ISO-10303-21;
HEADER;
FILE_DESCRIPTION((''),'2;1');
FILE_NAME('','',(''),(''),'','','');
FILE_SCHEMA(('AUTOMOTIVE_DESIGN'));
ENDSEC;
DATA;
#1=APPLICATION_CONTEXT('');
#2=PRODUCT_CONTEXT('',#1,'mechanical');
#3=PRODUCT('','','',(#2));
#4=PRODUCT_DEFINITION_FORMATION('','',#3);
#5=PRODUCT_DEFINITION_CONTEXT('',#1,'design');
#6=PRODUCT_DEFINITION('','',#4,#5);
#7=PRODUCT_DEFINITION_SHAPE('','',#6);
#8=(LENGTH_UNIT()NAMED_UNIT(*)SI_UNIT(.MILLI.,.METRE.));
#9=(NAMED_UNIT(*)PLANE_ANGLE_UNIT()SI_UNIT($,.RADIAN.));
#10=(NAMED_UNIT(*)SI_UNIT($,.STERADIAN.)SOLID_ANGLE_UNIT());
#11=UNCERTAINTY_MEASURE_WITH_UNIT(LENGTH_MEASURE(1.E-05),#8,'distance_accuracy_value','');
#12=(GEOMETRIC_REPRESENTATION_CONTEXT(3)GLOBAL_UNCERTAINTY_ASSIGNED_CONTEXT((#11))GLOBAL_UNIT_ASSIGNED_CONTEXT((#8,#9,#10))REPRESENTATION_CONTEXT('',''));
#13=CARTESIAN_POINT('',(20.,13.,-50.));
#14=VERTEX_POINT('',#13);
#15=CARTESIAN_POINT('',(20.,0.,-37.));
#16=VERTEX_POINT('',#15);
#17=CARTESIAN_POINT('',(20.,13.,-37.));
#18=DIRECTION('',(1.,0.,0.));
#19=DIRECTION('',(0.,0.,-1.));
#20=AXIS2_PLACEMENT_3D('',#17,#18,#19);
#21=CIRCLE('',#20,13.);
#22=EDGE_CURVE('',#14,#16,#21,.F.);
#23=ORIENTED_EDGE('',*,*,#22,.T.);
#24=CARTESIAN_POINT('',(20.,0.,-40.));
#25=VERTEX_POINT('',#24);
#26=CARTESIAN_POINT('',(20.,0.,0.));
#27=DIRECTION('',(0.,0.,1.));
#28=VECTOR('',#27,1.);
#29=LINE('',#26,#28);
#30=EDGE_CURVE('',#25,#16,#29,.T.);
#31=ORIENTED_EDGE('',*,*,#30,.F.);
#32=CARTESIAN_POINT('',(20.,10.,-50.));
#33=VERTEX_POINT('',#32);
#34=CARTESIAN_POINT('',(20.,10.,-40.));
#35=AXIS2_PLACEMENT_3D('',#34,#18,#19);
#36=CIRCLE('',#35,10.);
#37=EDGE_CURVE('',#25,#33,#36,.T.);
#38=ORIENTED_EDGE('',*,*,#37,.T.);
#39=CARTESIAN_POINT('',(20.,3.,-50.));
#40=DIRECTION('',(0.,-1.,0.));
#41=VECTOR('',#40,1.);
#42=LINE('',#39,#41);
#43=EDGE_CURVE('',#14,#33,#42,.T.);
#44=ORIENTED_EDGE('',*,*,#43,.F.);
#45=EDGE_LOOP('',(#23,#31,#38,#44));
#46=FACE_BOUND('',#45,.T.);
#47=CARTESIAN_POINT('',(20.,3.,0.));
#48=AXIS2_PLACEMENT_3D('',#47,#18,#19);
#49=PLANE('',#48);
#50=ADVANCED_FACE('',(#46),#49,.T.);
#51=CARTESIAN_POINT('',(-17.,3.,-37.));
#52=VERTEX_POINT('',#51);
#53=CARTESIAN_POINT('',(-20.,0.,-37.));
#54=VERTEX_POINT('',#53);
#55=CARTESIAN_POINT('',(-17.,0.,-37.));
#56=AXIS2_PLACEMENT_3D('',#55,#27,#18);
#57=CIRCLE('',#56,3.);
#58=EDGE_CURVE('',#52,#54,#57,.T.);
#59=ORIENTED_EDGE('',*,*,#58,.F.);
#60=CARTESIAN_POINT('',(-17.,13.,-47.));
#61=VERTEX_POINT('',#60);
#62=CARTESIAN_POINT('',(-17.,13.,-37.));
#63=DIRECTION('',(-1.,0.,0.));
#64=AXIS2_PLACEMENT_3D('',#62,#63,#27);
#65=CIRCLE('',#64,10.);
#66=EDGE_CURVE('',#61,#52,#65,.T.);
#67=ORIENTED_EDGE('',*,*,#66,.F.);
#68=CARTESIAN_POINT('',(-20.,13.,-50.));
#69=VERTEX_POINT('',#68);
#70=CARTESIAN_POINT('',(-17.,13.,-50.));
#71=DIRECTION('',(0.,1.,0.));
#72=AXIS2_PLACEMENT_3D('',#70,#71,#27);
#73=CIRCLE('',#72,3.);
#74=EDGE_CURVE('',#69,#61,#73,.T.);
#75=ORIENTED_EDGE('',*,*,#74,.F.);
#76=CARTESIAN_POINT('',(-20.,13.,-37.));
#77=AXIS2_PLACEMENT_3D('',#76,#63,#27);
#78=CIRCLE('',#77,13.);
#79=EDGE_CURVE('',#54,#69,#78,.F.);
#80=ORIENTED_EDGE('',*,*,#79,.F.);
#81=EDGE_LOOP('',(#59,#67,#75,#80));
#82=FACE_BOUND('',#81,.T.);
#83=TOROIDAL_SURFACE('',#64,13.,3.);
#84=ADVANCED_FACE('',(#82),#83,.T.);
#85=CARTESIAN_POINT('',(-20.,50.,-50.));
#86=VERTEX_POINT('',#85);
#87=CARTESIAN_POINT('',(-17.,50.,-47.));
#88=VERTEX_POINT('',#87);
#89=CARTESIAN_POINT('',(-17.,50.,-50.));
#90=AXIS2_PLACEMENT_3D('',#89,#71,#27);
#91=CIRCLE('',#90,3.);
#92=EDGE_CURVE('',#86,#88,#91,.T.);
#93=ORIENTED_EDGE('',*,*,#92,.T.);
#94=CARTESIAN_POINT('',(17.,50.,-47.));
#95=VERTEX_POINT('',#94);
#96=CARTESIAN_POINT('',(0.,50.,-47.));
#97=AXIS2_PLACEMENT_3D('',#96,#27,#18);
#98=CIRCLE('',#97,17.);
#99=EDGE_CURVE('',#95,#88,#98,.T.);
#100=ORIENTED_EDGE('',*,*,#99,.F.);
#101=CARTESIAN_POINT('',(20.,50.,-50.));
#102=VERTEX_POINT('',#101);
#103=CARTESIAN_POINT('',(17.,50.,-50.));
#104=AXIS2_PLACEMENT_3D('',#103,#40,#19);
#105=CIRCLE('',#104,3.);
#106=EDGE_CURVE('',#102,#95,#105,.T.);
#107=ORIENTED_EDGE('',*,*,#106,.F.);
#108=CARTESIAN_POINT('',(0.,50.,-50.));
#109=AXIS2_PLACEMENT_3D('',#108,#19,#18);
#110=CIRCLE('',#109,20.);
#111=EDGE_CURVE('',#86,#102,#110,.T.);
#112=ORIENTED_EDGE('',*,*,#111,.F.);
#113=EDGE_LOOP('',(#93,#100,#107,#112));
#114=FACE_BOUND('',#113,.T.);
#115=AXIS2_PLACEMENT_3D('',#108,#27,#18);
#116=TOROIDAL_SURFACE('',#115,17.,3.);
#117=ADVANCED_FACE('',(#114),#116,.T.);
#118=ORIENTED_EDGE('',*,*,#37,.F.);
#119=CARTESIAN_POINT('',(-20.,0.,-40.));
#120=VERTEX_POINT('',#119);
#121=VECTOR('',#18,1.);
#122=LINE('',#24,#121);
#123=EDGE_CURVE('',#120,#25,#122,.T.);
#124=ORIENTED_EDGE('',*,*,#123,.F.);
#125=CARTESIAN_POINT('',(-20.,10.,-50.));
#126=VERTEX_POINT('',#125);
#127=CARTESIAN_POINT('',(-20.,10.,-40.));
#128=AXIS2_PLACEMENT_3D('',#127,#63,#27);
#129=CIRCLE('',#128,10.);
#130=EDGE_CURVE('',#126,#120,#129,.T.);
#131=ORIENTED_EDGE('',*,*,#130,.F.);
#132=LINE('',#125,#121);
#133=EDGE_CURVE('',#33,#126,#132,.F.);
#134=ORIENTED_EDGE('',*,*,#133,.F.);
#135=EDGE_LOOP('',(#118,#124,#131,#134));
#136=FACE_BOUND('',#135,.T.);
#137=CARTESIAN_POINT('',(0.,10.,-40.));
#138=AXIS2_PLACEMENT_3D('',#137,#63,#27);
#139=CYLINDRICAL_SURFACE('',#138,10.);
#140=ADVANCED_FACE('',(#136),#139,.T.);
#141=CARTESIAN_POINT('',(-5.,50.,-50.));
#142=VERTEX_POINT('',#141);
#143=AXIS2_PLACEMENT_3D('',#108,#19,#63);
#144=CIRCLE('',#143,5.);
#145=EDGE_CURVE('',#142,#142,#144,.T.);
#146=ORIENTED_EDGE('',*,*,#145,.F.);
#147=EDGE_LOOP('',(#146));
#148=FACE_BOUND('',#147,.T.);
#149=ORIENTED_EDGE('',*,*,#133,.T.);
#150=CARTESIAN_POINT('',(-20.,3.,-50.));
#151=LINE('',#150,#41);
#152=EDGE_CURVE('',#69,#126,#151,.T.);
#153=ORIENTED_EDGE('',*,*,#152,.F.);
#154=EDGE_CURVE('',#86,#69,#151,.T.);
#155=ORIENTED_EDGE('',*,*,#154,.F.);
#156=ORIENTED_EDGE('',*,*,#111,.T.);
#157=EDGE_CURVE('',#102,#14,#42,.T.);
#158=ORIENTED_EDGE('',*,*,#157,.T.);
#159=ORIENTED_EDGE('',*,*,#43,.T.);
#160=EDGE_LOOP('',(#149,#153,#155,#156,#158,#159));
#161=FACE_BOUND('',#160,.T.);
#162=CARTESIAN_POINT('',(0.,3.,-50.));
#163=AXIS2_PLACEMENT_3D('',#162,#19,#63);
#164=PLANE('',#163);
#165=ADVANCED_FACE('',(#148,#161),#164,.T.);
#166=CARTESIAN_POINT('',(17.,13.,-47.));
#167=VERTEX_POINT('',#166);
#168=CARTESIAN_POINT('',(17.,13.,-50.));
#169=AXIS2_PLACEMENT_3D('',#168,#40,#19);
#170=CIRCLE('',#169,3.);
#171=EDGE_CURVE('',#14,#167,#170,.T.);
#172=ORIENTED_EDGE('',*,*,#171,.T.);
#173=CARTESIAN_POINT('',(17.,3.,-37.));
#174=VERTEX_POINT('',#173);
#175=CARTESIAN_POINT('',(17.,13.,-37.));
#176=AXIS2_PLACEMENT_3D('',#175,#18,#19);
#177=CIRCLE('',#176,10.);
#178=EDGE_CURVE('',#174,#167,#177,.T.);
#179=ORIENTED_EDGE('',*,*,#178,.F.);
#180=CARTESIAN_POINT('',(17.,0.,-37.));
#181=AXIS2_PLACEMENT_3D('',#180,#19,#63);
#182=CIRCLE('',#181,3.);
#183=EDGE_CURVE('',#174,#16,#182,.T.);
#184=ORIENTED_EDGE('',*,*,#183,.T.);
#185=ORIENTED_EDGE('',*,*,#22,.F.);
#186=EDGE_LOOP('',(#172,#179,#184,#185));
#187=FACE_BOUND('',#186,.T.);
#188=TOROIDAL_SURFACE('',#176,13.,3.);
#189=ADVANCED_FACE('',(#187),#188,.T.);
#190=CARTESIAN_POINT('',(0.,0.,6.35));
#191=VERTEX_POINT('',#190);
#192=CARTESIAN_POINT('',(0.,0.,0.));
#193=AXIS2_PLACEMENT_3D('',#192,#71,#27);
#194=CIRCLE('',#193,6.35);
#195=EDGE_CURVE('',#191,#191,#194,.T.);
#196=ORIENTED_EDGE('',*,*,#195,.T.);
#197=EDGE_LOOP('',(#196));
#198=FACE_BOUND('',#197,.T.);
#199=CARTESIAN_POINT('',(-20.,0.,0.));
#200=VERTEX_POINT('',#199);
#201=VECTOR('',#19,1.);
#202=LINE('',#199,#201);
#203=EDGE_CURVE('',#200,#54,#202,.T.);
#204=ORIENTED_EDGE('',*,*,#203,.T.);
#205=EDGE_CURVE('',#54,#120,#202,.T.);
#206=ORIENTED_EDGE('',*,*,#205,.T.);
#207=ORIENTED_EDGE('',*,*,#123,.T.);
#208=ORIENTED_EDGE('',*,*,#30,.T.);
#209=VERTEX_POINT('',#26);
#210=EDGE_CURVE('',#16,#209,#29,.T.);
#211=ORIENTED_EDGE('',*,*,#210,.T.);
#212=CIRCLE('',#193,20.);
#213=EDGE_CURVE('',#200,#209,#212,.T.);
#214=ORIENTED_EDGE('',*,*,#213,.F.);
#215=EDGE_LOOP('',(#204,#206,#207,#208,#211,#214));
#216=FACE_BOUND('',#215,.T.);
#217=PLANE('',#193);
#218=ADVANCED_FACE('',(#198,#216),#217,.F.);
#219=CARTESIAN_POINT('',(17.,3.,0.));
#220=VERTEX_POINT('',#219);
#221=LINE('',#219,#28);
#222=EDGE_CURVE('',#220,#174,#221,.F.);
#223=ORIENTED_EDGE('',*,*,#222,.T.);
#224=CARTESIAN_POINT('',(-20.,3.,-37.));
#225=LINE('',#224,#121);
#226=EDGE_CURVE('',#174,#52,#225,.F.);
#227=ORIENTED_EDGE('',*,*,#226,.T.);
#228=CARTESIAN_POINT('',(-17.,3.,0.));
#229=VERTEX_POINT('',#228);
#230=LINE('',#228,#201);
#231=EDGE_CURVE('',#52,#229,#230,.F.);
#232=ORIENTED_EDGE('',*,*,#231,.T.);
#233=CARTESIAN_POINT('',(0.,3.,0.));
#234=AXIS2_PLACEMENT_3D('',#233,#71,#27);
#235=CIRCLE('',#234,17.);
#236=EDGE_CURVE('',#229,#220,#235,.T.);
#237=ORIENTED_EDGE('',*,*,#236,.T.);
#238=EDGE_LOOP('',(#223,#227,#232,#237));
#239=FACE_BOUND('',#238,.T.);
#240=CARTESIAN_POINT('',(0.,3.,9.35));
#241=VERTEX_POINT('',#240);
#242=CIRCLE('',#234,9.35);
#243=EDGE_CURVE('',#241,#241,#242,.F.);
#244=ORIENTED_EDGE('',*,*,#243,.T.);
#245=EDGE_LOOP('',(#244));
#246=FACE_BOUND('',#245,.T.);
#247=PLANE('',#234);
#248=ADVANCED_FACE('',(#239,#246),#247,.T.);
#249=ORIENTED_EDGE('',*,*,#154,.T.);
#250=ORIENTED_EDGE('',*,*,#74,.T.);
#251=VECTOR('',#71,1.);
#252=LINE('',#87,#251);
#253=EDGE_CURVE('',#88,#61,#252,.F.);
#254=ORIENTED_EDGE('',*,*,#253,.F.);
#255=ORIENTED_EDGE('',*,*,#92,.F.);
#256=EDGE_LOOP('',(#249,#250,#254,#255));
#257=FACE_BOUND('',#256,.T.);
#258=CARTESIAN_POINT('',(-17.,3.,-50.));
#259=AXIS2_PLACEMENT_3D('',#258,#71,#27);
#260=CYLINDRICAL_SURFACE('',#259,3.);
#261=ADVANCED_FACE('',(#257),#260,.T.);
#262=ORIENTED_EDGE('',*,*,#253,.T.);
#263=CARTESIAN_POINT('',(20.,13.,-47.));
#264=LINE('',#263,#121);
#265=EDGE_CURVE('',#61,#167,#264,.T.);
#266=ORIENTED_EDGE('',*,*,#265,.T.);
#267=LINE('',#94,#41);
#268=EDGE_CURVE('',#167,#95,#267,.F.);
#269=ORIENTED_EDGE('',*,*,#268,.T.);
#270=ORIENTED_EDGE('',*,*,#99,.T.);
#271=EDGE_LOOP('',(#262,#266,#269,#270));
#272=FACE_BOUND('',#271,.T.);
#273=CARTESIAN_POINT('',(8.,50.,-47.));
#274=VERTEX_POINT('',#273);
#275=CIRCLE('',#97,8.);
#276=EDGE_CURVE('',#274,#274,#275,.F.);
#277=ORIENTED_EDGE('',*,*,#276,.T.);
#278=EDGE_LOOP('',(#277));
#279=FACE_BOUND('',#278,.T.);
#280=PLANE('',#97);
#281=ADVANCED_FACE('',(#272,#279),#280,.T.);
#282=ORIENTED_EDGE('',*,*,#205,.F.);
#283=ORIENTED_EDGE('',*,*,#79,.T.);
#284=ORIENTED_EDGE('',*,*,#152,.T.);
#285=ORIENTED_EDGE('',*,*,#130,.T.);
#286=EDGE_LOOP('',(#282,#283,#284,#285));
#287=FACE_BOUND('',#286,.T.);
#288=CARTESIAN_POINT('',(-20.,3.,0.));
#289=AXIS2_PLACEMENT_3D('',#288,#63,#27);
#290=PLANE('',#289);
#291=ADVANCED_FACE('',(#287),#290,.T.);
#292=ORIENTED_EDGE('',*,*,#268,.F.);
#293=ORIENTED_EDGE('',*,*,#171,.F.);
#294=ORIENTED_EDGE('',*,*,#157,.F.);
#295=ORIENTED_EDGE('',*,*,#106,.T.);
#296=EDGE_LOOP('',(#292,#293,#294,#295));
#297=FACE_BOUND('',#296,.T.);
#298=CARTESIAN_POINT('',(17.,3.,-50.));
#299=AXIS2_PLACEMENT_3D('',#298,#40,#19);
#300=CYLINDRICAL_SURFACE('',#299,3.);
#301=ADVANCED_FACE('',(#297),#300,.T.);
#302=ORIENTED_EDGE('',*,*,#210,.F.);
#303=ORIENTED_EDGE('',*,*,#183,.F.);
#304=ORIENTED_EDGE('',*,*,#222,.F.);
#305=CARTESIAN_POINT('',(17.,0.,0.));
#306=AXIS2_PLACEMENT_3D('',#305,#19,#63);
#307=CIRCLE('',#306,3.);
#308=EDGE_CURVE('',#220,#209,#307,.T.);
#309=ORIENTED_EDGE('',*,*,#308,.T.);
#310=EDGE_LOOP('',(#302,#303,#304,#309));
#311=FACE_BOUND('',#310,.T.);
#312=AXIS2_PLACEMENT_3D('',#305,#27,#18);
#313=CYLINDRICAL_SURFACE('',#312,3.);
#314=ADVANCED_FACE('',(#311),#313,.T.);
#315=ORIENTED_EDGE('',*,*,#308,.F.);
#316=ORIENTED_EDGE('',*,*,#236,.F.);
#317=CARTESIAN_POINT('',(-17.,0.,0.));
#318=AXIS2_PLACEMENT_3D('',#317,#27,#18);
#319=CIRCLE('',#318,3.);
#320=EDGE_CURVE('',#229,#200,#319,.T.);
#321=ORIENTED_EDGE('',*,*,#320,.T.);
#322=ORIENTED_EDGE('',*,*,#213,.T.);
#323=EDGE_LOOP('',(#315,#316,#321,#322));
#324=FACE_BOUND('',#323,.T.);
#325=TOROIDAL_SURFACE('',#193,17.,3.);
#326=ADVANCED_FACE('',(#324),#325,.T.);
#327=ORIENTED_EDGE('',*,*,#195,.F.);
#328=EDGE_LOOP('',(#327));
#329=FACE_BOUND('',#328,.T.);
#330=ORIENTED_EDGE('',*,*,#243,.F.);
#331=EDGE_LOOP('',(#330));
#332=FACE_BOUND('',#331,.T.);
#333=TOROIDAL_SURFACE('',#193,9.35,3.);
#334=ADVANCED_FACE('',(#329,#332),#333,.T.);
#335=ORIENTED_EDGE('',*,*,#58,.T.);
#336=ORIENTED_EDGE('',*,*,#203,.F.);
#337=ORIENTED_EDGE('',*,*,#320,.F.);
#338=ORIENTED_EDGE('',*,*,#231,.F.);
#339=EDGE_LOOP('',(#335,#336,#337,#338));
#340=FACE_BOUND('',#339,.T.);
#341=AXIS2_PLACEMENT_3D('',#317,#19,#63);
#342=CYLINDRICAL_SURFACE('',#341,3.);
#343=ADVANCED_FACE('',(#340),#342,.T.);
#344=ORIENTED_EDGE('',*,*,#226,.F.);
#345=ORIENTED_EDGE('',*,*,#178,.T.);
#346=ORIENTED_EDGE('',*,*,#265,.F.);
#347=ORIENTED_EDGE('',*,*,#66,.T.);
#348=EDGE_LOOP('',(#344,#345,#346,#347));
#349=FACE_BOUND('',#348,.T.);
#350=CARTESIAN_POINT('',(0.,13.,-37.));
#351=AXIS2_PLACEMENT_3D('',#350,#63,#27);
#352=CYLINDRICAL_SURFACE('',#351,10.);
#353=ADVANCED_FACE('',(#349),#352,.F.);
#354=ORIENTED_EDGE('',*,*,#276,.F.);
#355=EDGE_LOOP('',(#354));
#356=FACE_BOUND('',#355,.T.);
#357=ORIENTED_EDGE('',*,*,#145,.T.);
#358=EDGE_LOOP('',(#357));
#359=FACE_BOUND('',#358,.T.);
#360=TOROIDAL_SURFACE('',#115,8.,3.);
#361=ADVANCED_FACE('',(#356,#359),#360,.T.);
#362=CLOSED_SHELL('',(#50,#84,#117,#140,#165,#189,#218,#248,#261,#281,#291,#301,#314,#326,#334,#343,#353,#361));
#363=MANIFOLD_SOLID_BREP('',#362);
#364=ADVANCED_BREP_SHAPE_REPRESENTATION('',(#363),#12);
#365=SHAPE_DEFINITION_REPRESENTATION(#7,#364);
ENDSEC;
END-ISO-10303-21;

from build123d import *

# Parameters (mm, degrees)
SKETCH1_R           = 20
SKETCH1_R_2         = 6.35
BOSS_EXTRUDE1_DEPTH = 3
SKETCH2_R           = 5
BOSS_EXTRUDE2_DEPTH = 3
FILLET1_R           = 10
FILLET2_R           = 10
FILLET3_R           = 3
FILLET4_R           = 3


with BuildPart() as part:
    # Sketch1 → Boss-Extrude1 (new body)
    # profile 1 of 2: a face of its own
    with BuildSketch(Plane(origin=(0, 0, 0), x_dir=(1, 0, 0), z_dir=(0, 1, 0))):
        with BuildLine():
            Line((-20, 50), (-20, 0))
            ThreePointArc((-20, 0), (0, 20), (20, 0))
            Line((20, 0), (20, 50))
            Line((20, 50), (-20, 50))
        make_face()
    # profile 2 of 2: a face of its own
    with BuildSketch(Plane(origin=(0, 0, 0), x_dir=(1, 0, 0), z_dir=(0, 1, 0))):
        Circle(SKETCH1_R)
        with Locations(Location((0, 0, 0), (0, 0, 270))):
            Circle(SKETCH1_R_2, mode=Mode.SUBTRACT)
    extrude(amount=BOSS_EXTRUDE1_DEPTH)

    # Sketch2 → Boss-Extrude2 (add)
    with BuildSketch(Plane(origin=(0, 0, -50), x_dir=(-1, 0, 0), z_dir=(0, 0, -1))):
        with BuildLine():
            Line((-20, 3), (-20, 50))
            ThreePointArc((-20, 50), (0, 70), (20, 50))
            Line((20, 50), (20, 3))
            Line((20, 3), (20, 0))
            Line((20, 0), (-20, 0))
            Line((-20, 0), (-20, 3))
        make_face()
        with Locations((0, 50)):
            Circle(SKETCH2_R, mode=Mode.SUBTRACT)
    extrude(amount=-BOSS_EXTRUDE2_DEPTH)

    # Fillet1
    fillet1_edges = [part.edges().sort_by_distance(p)[0] for p in [
        (0, 3, -47),
    ]]
    fillet(fillet1_edges, radius=FILLET1_R)

    # Fillet2
    fillet2_edges = [part.edges().sort_by_distance(p)[0] for p in [
        (0, 0, -50),
    ]]
    fillet(fillet2_edges, radius=FILLET2_R)

    # Fillet3
    fillet3_edges = [part.edges().sort_by_distance(p)[0] for p in [
        (20, 5.928932188, -44.071067812),
        (20, 31.5, -47),
        (0, 70, -47),
        (-20, 31.5, -47),
        (-20, 5.928932188, -44.071067812),
        (0, 3, -6.35),
        (0, 3, 20),
        (-20, 3, -18.5),
        (20, 3, -18.5),
    ]]
    fillet(fillet3_edges, radius=FILLET3_R - 0.0001)  # a hair under: the kernel refuses the full size

    # Fillet4
    fillet4_edges = [part.edges().sort_by_distance(p)[0] for p in [
        (5, 50, -47),
    ]]
    fillet(fillet4_edges, radius=FILLET4_R - 0.0001)  # a hair under: the kernel refuses the full size


solid = part.part
